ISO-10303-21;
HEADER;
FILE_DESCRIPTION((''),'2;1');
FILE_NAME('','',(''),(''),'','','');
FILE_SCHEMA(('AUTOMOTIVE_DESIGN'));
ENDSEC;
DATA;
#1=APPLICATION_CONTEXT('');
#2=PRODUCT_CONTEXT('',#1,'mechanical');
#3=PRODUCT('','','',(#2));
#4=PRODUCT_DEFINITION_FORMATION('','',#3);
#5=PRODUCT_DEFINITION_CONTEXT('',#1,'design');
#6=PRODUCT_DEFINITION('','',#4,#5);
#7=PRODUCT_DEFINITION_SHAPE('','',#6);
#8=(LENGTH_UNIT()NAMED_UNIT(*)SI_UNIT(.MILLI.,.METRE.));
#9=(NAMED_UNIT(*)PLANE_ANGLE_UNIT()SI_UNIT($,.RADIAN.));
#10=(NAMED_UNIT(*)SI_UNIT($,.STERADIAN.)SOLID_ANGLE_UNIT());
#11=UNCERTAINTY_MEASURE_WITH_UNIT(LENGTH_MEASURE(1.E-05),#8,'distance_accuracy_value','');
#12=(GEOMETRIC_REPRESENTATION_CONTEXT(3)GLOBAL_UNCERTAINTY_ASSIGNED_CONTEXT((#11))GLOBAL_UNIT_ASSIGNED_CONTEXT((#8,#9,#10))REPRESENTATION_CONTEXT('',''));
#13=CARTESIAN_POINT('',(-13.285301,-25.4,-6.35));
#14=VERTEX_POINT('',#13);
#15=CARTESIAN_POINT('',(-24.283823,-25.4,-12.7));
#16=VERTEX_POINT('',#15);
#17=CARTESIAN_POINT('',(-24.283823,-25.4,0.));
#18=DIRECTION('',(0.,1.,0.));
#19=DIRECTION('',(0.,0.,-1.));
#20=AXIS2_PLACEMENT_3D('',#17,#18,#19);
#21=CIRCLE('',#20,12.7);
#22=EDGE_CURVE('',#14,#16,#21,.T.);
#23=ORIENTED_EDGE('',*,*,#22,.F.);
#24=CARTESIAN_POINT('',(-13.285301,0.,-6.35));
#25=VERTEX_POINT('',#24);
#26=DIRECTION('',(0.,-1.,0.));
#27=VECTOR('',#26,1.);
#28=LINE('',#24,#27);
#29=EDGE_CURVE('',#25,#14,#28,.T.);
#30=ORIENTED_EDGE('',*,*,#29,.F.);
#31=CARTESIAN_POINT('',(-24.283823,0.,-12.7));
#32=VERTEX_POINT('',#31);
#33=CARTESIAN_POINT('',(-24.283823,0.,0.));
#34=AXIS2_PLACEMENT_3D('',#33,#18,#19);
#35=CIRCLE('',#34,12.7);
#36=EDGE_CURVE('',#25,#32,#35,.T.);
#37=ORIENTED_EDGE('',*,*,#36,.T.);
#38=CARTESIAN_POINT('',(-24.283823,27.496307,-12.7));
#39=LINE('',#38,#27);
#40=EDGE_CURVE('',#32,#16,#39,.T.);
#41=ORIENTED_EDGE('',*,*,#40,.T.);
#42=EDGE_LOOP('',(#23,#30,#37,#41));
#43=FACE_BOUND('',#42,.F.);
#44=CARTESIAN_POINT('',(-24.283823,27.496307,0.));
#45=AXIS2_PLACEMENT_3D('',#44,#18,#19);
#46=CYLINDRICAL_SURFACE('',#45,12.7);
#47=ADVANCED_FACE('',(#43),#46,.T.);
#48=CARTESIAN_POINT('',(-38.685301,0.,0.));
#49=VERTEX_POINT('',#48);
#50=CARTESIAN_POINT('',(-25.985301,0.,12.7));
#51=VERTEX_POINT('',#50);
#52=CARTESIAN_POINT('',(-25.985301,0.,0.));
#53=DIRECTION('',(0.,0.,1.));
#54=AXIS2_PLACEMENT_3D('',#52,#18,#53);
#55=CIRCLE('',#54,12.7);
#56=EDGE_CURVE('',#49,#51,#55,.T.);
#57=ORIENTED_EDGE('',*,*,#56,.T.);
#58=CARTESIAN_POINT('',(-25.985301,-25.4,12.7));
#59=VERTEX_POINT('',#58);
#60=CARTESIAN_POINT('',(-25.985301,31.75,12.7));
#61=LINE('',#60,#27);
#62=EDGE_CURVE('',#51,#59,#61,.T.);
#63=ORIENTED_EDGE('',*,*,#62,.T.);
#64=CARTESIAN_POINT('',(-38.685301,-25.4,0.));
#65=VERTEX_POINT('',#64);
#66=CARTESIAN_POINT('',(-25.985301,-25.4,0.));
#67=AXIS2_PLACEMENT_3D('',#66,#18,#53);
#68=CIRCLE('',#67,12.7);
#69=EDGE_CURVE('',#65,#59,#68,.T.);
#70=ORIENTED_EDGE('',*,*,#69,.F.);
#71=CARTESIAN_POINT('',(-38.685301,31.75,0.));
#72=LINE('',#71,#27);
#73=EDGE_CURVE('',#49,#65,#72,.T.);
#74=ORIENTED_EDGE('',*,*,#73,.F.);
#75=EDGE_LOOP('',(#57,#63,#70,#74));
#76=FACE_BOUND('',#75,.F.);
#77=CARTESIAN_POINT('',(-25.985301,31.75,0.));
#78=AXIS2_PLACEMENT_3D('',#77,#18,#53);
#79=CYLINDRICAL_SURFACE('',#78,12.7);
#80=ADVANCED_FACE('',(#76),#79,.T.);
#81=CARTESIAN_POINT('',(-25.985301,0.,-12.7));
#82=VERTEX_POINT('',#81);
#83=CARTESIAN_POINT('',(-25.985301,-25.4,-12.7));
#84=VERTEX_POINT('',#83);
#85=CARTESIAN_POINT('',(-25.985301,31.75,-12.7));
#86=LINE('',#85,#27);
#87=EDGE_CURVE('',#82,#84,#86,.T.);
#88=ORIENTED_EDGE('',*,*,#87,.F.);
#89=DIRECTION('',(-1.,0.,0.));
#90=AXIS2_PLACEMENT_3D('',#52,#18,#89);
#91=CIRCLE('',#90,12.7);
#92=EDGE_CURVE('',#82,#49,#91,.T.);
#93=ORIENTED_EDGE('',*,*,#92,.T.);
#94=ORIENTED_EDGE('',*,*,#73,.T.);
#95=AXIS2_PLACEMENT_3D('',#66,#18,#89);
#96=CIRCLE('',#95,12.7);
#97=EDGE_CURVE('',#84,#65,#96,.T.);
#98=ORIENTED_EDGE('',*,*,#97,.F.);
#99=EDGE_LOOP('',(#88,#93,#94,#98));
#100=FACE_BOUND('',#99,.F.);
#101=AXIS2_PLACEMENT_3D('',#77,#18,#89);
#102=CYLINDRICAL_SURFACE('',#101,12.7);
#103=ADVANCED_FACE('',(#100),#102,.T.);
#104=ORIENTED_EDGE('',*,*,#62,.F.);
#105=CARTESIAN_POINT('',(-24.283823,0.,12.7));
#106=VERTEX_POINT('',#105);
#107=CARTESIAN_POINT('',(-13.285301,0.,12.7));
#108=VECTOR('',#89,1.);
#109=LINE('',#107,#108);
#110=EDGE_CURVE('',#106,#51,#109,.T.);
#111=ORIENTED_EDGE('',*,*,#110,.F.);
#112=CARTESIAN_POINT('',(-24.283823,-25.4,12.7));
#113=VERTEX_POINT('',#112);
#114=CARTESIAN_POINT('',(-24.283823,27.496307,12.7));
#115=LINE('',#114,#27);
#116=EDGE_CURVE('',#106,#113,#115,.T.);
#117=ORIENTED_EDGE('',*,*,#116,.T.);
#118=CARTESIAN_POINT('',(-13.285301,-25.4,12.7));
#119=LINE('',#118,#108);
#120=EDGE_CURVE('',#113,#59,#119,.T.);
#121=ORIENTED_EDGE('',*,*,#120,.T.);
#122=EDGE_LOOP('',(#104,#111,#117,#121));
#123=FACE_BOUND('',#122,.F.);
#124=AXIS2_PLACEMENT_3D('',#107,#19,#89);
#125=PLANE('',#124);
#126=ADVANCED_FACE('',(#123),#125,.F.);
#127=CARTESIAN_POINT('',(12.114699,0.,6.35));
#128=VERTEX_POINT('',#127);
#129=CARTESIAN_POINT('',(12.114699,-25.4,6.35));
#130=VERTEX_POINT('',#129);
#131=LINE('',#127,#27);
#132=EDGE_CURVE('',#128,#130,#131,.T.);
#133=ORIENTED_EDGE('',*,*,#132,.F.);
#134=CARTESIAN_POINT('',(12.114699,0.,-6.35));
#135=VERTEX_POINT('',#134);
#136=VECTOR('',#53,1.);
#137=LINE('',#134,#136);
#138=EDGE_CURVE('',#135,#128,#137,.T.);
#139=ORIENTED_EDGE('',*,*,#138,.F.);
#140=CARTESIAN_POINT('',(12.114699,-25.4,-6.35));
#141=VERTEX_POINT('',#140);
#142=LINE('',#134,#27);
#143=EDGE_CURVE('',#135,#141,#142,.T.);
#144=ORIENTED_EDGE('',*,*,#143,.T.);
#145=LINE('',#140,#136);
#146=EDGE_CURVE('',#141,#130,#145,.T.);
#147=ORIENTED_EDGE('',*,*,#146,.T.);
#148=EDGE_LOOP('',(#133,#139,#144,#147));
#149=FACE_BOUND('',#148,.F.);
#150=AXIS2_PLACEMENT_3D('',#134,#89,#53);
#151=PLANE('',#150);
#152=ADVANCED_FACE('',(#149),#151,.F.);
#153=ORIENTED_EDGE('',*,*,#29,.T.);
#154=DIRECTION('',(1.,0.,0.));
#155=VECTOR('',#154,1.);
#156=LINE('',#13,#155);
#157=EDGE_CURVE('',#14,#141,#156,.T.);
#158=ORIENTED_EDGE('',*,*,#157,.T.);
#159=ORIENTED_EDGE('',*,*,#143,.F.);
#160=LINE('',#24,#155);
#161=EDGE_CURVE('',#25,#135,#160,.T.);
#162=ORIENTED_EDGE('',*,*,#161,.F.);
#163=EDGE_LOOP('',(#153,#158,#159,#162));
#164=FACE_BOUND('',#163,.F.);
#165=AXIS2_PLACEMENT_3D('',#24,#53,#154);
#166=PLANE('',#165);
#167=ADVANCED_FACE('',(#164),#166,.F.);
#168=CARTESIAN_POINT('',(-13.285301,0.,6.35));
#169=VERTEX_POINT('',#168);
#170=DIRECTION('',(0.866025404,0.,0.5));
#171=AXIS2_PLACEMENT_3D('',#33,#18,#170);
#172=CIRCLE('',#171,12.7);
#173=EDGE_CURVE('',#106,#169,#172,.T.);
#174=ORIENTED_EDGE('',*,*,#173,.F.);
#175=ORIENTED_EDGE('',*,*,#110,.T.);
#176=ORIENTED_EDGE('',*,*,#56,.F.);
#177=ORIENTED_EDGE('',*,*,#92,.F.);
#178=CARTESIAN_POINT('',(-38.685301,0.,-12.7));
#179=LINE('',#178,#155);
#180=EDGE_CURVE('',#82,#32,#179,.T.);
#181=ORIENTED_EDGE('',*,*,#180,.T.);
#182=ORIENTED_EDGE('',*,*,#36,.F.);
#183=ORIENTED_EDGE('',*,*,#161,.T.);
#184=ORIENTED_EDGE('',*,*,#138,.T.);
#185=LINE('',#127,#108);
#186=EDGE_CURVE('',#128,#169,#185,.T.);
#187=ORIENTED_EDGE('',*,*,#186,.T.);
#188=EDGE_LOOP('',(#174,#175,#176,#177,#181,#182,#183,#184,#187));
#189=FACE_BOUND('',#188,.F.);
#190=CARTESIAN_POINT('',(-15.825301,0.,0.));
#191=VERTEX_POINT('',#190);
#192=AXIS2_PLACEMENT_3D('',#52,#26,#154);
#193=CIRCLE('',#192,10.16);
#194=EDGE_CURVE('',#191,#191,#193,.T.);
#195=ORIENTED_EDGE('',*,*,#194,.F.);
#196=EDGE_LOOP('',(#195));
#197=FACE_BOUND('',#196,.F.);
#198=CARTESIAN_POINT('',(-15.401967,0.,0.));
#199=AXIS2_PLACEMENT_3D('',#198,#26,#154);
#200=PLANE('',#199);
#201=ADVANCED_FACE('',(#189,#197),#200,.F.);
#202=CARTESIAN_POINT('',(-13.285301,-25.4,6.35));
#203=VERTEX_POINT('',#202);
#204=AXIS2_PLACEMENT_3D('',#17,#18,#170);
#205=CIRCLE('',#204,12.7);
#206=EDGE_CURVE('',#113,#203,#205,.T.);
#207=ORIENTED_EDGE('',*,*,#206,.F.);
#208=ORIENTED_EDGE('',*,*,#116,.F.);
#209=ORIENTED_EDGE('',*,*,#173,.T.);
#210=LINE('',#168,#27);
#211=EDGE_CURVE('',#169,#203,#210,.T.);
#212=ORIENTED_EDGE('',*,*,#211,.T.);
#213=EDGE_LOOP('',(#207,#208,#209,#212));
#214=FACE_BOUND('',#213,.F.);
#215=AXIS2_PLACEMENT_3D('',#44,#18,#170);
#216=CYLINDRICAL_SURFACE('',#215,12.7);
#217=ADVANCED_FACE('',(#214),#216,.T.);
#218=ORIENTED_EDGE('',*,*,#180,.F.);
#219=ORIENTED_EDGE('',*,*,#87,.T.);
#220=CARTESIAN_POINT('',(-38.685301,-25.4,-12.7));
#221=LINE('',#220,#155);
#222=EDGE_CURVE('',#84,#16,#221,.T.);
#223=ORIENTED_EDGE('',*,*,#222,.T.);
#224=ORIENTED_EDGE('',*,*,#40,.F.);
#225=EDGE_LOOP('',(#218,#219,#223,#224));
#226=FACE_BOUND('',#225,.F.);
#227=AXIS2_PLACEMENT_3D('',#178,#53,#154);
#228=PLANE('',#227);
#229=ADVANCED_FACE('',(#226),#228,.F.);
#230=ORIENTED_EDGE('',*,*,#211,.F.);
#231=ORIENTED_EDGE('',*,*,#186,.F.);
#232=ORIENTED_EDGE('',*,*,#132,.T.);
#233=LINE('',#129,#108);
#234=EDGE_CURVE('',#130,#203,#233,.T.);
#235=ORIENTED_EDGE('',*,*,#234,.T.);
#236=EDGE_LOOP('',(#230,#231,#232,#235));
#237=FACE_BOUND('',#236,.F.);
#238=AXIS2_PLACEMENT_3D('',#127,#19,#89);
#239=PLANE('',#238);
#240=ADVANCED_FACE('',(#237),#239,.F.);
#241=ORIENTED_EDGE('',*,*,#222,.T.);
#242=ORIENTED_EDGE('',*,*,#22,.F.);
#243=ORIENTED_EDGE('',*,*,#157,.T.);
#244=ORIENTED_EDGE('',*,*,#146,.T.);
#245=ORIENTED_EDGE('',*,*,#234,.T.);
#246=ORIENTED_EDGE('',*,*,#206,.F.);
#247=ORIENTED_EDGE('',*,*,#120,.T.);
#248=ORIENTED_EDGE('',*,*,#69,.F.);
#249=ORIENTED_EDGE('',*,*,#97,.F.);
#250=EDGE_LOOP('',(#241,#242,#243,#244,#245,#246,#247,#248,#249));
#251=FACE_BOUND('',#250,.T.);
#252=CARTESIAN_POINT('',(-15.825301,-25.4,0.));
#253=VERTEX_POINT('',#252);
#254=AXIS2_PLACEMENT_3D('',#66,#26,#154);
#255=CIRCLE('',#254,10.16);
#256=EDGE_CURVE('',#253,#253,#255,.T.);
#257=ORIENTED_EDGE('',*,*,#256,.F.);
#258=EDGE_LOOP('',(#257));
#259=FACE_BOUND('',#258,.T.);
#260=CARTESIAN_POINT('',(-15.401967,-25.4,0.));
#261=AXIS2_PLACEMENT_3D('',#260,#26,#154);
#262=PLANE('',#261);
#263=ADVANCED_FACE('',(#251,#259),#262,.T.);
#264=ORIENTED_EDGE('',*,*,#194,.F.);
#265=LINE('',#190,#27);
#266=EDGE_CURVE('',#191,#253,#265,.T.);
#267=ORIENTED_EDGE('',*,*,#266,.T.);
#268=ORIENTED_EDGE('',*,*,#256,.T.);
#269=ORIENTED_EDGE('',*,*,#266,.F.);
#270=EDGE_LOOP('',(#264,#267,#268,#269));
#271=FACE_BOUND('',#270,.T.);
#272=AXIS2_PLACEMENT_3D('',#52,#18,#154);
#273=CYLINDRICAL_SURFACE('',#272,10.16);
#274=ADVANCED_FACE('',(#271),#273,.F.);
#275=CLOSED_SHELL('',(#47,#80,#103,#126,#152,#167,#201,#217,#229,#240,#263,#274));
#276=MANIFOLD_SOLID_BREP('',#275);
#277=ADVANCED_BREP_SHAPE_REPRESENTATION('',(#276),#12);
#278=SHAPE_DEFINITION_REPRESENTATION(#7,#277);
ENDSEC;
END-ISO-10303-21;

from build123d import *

# Parameters (mm, degrees)
F0_R        = 10.16
F1_DEPTH    = 25.4
F2_T1_DEPTH = 80.3926131403
F2_T3_DEPTH = 88.9


# Not quite as in the source:
# - a fillet or chamfer that OpenCascade refuses, or shapes differently, is made with other operations: its cross-section is extruded or revolved along the edge and cut away or added


with BuildPart() as f1:
    # F0 (on Front) → F1 (new body)
    with BuildSketch(Plane.XZ):
        Polygon((-13.2853005409, 12.7), (-38.6853005409, 12.7), (-38.6853005409, -12.7), (-13.2853005409, -12.7), (-13.2853005409, -6.35), (12.1146994591, -6.35), (12.1146994591, 6.35), (-13.2853005409, 6.35), align=None)
        with Locations((-25.9853005409, 0)):
            Circle(F0_R, mode=Mode.SUBTRACT)
    extrude(amount=F1_DEPTH)

    # F2: fillet of radius 12.7 on 4 edges, made by hand

    # F2_s2 → F2_t1 (cut)
    with BuildSketch(Plane.XZ.offset(-27.4963065702)):
        with BuildLine():
            ThreePointArc((-13.2853005409, 6.35), (-17.933823169, 10.9985226281), (-24.283823169, 12.7))
            Line((-24.283823169, 12.7), (-13.2853005409, 12.7))
            Line((-13.2853005409, 12.7), (-13.2853005409, 6.35))
        make_face()
        with BuildLine():
            ThreePointArc((-24.283823169, -12.7), (-17.933823169, -10.9985226281), (-13.2853005409, -6.35))
            Line((-13.2853005409, -6.35), (-13.2853005409, -12.7))
            Line((-13.2853005409, -12.7), (-24.283823169, -12.7))
        make_face()
    extrude(amount=F2_T1_DEPTH, mode=Mode.SUBTRACT)

    # F2_s4 → F2_t3 (cut)
    with BuildSketch(Plane.XZ.offset(-31.75)):
        with BuildLine():
            ThreePointArc((-25.9853005409, 12.7), (-34.965556662, 8.9802561211), (-38.6853005409, 0))
            Line((-38.6853005409, 0), (-38.6853005409, 12.7))
            Line((-38.6853005409, 12.7), (-25.9853005409, 12.7))
        make_face()
        with BuildLine():
            ThreePointArc((-38.6853005409, 0), (-34.965556662, -8.9802561211), (-25.9853005409, -12.7))
            Line((-25.9853005409, -12.7), (-38.6853005409, -12.7))
            Line((-38.6853005409, -12.7), (-38.6853005409, 0))
        make_face()
    extrude(amount=F2_T3_DEPTH, mode=Mode.SUBTRACT)


solid = f1.part
